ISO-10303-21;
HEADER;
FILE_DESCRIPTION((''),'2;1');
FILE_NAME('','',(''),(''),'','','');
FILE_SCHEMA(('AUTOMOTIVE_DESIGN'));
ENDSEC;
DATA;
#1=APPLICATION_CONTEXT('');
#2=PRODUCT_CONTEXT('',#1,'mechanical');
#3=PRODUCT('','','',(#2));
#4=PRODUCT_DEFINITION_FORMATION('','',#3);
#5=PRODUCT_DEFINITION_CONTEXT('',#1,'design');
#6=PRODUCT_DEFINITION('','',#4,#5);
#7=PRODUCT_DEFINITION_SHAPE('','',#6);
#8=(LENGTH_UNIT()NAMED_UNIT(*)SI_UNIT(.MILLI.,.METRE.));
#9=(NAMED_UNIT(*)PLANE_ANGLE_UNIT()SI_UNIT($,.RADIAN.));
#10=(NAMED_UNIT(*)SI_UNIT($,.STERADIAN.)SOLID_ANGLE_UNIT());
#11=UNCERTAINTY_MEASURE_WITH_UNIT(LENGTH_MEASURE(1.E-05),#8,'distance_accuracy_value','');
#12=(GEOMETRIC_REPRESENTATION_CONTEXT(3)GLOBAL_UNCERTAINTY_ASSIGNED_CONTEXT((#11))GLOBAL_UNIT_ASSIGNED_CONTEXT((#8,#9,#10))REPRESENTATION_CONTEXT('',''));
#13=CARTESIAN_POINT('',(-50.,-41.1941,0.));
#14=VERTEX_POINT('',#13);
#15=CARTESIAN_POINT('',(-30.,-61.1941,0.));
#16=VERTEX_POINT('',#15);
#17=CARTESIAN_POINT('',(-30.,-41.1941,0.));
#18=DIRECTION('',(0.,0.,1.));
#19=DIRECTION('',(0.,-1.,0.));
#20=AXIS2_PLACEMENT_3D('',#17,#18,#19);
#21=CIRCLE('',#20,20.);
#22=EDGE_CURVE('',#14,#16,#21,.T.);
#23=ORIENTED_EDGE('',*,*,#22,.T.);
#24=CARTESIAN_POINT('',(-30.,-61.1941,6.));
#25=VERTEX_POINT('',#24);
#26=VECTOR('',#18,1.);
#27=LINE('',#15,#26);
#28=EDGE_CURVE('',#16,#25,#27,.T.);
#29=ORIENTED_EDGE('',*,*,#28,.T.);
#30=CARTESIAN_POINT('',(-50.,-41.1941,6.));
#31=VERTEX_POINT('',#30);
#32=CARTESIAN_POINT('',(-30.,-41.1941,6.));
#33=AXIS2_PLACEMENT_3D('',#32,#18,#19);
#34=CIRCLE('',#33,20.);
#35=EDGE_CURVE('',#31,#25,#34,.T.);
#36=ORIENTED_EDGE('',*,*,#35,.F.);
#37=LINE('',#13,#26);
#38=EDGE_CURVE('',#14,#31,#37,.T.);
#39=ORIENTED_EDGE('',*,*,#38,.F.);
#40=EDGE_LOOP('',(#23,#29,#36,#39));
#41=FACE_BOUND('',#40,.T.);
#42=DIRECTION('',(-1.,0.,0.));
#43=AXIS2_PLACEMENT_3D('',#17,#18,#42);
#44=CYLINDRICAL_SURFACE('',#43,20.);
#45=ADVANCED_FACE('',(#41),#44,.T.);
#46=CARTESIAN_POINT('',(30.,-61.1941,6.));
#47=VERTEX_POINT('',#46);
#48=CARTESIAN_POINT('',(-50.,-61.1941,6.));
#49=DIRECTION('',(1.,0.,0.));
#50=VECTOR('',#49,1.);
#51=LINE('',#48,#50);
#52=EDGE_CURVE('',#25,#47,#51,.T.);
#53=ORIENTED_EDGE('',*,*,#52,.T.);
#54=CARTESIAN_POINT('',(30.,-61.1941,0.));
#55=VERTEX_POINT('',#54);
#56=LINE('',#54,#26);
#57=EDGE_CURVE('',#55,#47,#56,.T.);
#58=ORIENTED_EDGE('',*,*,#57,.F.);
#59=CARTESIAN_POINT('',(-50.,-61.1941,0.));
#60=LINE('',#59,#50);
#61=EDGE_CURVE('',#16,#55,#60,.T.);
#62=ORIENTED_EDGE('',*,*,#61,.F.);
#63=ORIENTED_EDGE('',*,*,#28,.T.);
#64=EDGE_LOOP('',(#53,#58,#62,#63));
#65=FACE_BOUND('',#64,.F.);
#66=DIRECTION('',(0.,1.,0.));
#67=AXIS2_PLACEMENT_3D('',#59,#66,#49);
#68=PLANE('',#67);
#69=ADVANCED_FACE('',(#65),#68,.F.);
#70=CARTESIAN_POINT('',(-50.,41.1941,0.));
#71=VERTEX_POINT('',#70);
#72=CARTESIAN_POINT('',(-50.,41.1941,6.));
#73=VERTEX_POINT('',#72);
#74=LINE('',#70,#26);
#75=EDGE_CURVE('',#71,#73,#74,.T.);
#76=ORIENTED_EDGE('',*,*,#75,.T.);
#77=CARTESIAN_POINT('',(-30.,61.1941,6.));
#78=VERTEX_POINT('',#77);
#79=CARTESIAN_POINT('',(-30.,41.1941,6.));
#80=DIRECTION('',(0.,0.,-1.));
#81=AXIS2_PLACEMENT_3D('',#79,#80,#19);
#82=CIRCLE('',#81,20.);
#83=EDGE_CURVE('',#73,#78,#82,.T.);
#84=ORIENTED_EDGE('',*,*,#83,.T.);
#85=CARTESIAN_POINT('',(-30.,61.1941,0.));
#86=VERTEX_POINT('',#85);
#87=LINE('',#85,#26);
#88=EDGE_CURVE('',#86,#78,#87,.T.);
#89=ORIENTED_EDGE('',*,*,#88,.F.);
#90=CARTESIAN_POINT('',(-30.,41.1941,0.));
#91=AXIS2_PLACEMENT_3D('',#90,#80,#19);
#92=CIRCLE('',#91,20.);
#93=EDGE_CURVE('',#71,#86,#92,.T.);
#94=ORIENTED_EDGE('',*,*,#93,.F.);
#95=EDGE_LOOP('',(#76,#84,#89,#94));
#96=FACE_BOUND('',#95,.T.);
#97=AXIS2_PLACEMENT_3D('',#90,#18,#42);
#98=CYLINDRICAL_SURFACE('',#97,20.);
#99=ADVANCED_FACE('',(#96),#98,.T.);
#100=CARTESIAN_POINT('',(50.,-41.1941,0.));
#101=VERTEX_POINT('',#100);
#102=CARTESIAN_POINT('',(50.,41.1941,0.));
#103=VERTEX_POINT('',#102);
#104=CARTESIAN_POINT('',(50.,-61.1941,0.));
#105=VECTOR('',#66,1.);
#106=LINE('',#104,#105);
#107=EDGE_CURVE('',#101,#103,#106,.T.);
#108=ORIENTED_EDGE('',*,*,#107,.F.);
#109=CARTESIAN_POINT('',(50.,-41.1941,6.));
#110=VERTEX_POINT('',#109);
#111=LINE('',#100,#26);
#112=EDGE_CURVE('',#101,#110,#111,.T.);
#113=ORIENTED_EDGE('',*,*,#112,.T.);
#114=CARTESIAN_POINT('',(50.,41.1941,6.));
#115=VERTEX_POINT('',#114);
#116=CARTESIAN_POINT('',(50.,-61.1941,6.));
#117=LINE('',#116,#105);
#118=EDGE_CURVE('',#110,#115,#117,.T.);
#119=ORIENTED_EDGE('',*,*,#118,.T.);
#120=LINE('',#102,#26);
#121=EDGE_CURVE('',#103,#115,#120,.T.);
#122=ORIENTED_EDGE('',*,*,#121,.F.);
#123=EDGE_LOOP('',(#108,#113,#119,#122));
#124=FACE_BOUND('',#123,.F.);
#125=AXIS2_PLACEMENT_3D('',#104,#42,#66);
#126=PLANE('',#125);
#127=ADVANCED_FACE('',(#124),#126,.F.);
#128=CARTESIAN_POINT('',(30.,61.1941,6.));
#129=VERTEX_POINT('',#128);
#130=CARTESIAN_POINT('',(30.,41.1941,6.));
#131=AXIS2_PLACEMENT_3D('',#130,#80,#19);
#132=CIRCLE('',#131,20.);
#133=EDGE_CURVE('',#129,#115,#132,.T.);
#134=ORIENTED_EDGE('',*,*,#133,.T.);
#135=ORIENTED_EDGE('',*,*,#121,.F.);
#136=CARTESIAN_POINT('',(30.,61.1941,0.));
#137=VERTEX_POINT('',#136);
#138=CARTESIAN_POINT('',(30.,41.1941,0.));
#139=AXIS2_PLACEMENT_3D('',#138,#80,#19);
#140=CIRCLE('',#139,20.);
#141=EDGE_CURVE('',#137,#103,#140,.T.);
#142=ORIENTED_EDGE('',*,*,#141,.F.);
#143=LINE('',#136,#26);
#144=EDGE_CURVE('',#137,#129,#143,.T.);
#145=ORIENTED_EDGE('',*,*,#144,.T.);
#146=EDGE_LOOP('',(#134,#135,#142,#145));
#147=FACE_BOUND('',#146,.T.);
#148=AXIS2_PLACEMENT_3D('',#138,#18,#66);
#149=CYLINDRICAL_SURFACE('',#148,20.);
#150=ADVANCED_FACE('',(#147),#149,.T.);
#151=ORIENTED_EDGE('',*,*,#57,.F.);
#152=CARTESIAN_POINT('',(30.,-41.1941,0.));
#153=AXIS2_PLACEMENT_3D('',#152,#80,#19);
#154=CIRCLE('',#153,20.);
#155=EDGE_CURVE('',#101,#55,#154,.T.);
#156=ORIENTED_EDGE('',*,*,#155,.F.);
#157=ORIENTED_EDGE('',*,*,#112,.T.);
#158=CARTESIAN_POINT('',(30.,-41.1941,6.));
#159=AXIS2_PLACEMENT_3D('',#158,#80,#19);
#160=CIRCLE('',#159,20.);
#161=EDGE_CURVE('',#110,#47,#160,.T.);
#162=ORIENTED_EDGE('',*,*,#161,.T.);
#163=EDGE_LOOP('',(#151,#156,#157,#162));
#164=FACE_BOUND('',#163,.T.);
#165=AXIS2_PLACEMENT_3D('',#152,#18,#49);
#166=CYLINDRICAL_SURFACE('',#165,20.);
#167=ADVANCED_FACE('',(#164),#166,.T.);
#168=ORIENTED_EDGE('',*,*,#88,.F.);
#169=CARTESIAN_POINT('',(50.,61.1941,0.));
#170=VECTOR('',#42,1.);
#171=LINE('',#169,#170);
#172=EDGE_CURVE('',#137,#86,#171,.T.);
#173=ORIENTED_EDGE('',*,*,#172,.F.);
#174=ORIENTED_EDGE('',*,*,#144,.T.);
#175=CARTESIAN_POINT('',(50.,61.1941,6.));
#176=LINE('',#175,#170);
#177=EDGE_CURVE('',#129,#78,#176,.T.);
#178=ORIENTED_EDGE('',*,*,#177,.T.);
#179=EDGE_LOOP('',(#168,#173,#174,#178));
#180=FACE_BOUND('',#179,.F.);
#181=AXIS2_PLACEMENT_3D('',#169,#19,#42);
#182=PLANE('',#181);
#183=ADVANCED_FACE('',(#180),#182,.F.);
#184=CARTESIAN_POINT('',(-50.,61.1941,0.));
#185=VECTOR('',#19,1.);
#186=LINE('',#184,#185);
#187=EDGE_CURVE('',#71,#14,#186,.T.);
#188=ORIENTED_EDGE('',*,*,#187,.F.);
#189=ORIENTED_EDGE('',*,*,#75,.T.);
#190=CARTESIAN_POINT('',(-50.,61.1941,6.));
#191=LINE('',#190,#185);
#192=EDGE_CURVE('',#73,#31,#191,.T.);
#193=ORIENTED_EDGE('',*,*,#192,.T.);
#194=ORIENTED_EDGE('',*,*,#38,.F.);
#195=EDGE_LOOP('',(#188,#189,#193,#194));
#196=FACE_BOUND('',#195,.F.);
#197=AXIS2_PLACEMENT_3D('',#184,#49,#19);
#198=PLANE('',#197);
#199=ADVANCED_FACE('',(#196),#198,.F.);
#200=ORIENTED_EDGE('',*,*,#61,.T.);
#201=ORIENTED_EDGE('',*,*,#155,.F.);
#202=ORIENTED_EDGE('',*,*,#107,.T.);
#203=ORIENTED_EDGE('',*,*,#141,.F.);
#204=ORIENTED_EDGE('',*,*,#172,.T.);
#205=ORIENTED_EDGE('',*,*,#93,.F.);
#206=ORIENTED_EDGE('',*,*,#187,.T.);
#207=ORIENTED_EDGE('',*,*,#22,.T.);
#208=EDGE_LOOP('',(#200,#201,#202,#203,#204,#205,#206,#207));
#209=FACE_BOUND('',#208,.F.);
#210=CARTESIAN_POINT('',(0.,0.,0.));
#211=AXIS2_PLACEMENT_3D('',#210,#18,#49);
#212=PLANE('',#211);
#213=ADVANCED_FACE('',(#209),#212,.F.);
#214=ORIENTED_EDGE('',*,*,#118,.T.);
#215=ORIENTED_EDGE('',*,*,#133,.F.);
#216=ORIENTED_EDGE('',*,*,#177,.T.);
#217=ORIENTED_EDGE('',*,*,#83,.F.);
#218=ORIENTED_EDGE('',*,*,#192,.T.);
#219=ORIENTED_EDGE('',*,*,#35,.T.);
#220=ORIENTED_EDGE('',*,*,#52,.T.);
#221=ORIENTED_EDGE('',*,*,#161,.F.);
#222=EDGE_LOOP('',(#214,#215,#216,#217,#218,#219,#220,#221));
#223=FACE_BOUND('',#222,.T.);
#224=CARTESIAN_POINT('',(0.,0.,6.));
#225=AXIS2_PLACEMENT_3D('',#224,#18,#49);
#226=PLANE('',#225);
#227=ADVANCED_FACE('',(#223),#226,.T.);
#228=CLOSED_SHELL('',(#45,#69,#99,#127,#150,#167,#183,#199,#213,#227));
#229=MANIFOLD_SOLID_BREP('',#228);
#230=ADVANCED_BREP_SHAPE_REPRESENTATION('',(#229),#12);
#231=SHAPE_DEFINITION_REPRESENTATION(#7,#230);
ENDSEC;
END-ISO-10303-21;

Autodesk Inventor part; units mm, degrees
ref_plane "YZ Plane" through (0, 0, 0) normal (1, 0, 0) x (0, 1, 0)
ref_plane "XZ Plane" through (0, 0, 0) normal (0, 1, 0) x (-1, 0, 0)
ref_plane "XY Plane" through (0, 0, 0) normal (0, 0, 1) x (1, 0, 0)
sketch "Sketch1" plane through (0, 0, 0) normal (0, 0, 1) x (1, 0, 0)
  line L0 (-50, -61.1941) -> (50, -61.1941)
  line L1 (50, -61.1941) -> (50, 61.1941)
  line L2 (50, 61.1941) -> (-50, 61.1941)
  line L3 (-50, 61.1941) -> (-50, -61.1941)
  line L4 (-50, -61.1941) -> (50, 61.1941) construction
  line L5 (50, -61.1941) -> (-50, 61.1941) construction
  point P0 (0, 0)
  dimension "d0" = 100
  dimension "d1" = 122.3883
extrude "Plate1" add sketch "Sketch1" along normal blind 6
fillet "Corner Round1" radius 20 4 edges at (50, -61.1941, 3) (-50, -61.1941, 3) (-50, 61.1941, 3) (50, 61.1941, 3)
sketch "Sketch5" plane through (0, 0, 6) normal (0, 0, 1) x (1, 0, 0)
  line L0 (50, 41.1941) -> (50, -41.1941) projected
  line L1 (50, 31.1941) -> (-50, 31.1941)
  line L2 (-50, -41.1941) -> (-50, 41.1941) projected
  line L3 (-30, 61.1941) -> (30, 61.1941) projected
  point P0 (0, 0)
  dimension "d23" = 30
feature "Fold1" [suppressed]
equation "\"d1\" = Legs_Upper_plate_lenght"
equation "\"d2\" = Thickness"
equation "\"d24\" = BendReliefWidth"
equation "\"d25\" = BendReliefDepth"
equation "\"d26\" = MinimumRemnant"
equation "\"d27\" = TransitionRadius"
equation "\"d29\" = BendRadius"
equation "\"BendReliefWidth\" = Thickness"
equation "\"BendReliefDepth\" = 0.5 * Thickness"
equation "\"CornerReliefSize\" = 4 * Thickness"
equation "\"MinimumRemnant\" = 2 * Thickness"
equation "\"TransitionRadius\" = BendRadius"
equation "\"JacobiRadiusSize\" = BendRadius"
equation "\"GapSize\" = Thickness"
equation "\"Legs_Upper_plate_lenght\" = 122.388269"
equation "\"Thickness\" = 6"
equation "\"BendRadius\" = 5"
properties part number "PRS 9694 leg plate for filter_D1200" material "Stainless Steel"
